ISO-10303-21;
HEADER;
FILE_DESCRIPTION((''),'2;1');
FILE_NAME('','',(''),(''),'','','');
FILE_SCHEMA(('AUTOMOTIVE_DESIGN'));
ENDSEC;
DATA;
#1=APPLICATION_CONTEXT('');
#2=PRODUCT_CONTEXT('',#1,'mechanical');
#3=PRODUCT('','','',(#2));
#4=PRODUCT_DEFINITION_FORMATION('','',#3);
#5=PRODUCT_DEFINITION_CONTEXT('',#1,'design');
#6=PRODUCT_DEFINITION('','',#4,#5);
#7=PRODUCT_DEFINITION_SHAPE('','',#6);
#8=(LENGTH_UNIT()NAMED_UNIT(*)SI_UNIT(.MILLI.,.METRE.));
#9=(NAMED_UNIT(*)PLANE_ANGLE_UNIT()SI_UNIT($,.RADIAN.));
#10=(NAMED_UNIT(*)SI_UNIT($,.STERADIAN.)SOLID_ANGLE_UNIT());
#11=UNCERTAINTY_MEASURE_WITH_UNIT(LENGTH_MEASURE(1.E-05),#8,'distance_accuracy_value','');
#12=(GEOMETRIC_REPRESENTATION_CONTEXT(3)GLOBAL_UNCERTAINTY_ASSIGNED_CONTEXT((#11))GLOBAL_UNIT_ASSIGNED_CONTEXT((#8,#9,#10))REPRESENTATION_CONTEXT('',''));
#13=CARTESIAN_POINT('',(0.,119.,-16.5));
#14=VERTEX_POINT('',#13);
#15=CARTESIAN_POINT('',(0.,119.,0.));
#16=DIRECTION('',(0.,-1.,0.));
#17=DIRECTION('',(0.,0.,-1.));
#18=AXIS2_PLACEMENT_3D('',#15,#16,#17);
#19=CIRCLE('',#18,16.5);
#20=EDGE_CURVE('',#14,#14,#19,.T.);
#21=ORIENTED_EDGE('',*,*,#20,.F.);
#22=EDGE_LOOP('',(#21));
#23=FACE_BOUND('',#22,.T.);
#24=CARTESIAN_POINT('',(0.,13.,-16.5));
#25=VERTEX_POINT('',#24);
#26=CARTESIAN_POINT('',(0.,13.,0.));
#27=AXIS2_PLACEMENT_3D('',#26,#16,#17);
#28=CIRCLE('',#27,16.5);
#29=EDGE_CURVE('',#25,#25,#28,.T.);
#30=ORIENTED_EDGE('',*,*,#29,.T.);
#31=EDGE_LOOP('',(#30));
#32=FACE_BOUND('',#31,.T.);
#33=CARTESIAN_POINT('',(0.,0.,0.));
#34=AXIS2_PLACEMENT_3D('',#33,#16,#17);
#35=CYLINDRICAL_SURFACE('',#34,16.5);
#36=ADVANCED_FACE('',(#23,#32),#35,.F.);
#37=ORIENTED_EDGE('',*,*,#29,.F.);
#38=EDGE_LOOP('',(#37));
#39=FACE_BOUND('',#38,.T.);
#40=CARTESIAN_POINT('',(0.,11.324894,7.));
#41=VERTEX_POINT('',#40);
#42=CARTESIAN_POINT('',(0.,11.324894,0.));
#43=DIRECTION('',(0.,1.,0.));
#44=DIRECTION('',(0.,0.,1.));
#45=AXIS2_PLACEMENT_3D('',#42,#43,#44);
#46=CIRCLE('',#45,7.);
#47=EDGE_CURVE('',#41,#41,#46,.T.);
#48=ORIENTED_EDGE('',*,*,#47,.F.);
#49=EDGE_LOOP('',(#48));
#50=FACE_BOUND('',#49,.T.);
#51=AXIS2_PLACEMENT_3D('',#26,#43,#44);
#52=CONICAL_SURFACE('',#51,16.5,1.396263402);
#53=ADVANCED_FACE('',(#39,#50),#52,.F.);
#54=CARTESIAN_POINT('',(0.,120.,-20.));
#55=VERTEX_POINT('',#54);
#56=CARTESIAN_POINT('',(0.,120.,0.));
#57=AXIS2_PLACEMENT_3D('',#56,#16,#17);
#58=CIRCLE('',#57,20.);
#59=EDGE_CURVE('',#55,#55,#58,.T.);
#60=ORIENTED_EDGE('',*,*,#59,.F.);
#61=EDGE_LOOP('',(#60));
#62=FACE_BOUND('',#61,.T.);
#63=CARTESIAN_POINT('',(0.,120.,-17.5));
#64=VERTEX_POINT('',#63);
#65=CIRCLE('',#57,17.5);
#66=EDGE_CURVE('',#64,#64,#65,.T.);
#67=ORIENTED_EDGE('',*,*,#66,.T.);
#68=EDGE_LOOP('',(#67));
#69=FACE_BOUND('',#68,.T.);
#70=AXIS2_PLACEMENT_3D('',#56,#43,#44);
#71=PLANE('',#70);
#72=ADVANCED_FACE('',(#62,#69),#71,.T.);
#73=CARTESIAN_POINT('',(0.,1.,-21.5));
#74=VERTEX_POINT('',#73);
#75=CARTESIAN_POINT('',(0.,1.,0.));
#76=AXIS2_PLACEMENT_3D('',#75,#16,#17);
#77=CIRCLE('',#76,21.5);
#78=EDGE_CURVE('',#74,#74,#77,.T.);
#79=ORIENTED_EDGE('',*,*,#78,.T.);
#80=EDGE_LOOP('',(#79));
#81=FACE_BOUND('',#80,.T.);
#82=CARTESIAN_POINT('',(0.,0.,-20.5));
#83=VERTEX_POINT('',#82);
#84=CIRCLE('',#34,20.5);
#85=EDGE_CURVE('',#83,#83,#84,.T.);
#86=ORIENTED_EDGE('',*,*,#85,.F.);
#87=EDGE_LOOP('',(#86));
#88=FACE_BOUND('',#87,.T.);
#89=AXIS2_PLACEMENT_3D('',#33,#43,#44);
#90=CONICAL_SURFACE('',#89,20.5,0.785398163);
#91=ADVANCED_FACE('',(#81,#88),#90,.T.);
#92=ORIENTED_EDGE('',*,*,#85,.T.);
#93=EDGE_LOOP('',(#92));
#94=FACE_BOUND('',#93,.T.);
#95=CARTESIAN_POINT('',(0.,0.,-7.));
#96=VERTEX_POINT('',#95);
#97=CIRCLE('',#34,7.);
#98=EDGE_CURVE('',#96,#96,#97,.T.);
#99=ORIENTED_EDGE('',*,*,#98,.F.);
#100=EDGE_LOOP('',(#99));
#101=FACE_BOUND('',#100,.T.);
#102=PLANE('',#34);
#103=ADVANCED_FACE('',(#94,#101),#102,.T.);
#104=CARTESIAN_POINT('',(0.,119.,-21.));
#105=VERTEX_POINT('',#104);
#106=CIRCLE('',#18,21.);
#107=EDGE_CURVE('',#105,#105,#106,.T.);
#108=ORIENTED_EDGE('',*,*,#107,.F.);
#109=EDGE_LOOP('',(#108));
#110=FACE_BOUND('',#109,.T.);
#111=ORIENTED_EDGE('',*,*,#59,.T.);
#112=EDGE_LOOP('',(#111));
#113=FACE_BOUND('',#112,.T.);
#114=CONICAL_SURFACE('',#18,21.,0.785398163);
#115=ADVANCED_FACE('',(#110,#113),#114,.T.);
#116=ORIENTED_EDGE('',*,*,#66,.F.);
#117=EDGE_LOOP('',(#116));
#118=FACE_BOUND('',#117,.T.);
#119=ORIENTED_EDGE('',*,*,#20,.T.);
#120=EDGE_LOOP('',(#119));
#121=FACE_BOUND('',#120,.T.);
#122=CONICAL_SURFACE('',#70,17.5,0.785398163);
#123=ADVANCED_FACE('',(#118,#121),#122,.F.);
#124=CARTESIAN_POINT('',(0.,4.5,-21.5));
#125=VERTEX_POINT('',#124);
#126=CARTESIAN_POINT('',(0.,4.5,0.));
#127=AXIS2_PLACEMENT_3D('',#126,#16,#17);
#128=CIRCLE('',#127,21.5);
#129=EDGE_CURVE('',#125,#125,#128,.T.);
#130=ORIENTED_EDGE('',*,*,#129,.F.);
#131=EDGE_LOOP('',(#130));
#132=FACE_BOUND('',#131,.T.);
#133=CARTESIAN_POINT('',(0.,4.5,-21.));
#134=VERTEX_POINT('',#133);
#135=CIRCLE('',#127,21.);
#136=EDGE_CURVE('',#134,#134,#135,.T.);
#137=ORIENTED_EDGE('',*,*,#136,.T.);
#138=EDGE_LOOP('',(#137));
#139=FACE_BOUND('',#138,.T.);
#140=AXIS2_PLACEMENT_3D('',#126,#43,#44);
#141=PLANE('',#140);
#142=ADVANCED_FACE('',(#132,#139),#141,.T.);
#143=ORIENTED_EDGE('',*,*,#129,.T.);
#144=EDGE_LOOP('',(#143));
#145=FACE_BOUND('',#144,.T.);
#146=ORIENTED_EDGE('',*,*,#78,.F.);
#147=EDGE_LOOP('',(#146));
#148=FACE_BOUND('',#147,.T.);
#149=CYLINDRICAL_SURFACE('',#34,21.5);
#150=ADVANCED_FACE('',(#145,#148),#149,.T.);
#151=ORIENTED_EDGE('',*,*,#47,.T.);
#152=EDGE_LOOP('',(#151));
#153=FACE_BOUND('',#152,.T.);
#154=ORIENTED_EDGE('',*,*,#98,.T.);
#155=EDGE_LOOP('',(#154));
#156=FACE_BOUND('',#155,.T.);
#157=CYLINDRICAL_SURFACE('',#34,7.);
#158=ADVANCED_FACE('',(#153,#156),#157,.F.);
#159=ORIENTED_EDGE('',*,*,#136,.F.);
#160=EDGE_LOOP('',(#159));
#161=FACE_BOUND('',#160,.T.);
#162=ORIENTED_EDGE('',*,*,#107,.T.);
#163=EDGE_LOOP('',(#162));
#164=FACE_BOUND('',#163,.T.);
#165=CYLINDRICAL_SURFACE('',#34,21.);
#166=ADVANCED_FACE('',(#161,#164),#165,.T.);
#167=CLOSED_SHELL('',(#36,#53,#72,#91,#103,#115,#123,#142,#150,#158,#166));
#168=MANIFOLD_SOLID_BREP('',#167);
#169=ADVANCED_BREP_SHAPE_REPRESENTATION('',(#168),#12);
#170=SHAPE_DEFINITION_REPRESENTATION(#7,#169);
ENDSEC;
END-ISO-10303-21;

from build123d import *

# Parameters (mm, degrees)
OTW_R_GWINTOWANY_M161_D = 14


# Read off the part's stored shape, not the designer's step: Obrót1
with BuildPart() as part:
    # Obrót1 outline → Obrót1 (revolve)
    with BuildSketch(Plane.XY):
        Polygon((0, 10.090604818), (0, 0), (20.5, 0), (21.5, 1), (21.5, 4.5), (21, 4.5), (21, 119), (20, 120), (17.5, 120), (16.5, 119), (16.5, 13), align=None)
    revolve(axis=Axis((0, 0, 0), (0, 1, 0)))

    # Otwór gwintowany M161 (through all)
    with Locations(Plane(origin=(0, 0, 0), x_dir=(0, 0, -1), z_dir=(0, -1, 0))):
        with Locations((0, 0)):
            Hole(OTW_R_GWINTOWANY_M161_D / 2)


solid = part.part
